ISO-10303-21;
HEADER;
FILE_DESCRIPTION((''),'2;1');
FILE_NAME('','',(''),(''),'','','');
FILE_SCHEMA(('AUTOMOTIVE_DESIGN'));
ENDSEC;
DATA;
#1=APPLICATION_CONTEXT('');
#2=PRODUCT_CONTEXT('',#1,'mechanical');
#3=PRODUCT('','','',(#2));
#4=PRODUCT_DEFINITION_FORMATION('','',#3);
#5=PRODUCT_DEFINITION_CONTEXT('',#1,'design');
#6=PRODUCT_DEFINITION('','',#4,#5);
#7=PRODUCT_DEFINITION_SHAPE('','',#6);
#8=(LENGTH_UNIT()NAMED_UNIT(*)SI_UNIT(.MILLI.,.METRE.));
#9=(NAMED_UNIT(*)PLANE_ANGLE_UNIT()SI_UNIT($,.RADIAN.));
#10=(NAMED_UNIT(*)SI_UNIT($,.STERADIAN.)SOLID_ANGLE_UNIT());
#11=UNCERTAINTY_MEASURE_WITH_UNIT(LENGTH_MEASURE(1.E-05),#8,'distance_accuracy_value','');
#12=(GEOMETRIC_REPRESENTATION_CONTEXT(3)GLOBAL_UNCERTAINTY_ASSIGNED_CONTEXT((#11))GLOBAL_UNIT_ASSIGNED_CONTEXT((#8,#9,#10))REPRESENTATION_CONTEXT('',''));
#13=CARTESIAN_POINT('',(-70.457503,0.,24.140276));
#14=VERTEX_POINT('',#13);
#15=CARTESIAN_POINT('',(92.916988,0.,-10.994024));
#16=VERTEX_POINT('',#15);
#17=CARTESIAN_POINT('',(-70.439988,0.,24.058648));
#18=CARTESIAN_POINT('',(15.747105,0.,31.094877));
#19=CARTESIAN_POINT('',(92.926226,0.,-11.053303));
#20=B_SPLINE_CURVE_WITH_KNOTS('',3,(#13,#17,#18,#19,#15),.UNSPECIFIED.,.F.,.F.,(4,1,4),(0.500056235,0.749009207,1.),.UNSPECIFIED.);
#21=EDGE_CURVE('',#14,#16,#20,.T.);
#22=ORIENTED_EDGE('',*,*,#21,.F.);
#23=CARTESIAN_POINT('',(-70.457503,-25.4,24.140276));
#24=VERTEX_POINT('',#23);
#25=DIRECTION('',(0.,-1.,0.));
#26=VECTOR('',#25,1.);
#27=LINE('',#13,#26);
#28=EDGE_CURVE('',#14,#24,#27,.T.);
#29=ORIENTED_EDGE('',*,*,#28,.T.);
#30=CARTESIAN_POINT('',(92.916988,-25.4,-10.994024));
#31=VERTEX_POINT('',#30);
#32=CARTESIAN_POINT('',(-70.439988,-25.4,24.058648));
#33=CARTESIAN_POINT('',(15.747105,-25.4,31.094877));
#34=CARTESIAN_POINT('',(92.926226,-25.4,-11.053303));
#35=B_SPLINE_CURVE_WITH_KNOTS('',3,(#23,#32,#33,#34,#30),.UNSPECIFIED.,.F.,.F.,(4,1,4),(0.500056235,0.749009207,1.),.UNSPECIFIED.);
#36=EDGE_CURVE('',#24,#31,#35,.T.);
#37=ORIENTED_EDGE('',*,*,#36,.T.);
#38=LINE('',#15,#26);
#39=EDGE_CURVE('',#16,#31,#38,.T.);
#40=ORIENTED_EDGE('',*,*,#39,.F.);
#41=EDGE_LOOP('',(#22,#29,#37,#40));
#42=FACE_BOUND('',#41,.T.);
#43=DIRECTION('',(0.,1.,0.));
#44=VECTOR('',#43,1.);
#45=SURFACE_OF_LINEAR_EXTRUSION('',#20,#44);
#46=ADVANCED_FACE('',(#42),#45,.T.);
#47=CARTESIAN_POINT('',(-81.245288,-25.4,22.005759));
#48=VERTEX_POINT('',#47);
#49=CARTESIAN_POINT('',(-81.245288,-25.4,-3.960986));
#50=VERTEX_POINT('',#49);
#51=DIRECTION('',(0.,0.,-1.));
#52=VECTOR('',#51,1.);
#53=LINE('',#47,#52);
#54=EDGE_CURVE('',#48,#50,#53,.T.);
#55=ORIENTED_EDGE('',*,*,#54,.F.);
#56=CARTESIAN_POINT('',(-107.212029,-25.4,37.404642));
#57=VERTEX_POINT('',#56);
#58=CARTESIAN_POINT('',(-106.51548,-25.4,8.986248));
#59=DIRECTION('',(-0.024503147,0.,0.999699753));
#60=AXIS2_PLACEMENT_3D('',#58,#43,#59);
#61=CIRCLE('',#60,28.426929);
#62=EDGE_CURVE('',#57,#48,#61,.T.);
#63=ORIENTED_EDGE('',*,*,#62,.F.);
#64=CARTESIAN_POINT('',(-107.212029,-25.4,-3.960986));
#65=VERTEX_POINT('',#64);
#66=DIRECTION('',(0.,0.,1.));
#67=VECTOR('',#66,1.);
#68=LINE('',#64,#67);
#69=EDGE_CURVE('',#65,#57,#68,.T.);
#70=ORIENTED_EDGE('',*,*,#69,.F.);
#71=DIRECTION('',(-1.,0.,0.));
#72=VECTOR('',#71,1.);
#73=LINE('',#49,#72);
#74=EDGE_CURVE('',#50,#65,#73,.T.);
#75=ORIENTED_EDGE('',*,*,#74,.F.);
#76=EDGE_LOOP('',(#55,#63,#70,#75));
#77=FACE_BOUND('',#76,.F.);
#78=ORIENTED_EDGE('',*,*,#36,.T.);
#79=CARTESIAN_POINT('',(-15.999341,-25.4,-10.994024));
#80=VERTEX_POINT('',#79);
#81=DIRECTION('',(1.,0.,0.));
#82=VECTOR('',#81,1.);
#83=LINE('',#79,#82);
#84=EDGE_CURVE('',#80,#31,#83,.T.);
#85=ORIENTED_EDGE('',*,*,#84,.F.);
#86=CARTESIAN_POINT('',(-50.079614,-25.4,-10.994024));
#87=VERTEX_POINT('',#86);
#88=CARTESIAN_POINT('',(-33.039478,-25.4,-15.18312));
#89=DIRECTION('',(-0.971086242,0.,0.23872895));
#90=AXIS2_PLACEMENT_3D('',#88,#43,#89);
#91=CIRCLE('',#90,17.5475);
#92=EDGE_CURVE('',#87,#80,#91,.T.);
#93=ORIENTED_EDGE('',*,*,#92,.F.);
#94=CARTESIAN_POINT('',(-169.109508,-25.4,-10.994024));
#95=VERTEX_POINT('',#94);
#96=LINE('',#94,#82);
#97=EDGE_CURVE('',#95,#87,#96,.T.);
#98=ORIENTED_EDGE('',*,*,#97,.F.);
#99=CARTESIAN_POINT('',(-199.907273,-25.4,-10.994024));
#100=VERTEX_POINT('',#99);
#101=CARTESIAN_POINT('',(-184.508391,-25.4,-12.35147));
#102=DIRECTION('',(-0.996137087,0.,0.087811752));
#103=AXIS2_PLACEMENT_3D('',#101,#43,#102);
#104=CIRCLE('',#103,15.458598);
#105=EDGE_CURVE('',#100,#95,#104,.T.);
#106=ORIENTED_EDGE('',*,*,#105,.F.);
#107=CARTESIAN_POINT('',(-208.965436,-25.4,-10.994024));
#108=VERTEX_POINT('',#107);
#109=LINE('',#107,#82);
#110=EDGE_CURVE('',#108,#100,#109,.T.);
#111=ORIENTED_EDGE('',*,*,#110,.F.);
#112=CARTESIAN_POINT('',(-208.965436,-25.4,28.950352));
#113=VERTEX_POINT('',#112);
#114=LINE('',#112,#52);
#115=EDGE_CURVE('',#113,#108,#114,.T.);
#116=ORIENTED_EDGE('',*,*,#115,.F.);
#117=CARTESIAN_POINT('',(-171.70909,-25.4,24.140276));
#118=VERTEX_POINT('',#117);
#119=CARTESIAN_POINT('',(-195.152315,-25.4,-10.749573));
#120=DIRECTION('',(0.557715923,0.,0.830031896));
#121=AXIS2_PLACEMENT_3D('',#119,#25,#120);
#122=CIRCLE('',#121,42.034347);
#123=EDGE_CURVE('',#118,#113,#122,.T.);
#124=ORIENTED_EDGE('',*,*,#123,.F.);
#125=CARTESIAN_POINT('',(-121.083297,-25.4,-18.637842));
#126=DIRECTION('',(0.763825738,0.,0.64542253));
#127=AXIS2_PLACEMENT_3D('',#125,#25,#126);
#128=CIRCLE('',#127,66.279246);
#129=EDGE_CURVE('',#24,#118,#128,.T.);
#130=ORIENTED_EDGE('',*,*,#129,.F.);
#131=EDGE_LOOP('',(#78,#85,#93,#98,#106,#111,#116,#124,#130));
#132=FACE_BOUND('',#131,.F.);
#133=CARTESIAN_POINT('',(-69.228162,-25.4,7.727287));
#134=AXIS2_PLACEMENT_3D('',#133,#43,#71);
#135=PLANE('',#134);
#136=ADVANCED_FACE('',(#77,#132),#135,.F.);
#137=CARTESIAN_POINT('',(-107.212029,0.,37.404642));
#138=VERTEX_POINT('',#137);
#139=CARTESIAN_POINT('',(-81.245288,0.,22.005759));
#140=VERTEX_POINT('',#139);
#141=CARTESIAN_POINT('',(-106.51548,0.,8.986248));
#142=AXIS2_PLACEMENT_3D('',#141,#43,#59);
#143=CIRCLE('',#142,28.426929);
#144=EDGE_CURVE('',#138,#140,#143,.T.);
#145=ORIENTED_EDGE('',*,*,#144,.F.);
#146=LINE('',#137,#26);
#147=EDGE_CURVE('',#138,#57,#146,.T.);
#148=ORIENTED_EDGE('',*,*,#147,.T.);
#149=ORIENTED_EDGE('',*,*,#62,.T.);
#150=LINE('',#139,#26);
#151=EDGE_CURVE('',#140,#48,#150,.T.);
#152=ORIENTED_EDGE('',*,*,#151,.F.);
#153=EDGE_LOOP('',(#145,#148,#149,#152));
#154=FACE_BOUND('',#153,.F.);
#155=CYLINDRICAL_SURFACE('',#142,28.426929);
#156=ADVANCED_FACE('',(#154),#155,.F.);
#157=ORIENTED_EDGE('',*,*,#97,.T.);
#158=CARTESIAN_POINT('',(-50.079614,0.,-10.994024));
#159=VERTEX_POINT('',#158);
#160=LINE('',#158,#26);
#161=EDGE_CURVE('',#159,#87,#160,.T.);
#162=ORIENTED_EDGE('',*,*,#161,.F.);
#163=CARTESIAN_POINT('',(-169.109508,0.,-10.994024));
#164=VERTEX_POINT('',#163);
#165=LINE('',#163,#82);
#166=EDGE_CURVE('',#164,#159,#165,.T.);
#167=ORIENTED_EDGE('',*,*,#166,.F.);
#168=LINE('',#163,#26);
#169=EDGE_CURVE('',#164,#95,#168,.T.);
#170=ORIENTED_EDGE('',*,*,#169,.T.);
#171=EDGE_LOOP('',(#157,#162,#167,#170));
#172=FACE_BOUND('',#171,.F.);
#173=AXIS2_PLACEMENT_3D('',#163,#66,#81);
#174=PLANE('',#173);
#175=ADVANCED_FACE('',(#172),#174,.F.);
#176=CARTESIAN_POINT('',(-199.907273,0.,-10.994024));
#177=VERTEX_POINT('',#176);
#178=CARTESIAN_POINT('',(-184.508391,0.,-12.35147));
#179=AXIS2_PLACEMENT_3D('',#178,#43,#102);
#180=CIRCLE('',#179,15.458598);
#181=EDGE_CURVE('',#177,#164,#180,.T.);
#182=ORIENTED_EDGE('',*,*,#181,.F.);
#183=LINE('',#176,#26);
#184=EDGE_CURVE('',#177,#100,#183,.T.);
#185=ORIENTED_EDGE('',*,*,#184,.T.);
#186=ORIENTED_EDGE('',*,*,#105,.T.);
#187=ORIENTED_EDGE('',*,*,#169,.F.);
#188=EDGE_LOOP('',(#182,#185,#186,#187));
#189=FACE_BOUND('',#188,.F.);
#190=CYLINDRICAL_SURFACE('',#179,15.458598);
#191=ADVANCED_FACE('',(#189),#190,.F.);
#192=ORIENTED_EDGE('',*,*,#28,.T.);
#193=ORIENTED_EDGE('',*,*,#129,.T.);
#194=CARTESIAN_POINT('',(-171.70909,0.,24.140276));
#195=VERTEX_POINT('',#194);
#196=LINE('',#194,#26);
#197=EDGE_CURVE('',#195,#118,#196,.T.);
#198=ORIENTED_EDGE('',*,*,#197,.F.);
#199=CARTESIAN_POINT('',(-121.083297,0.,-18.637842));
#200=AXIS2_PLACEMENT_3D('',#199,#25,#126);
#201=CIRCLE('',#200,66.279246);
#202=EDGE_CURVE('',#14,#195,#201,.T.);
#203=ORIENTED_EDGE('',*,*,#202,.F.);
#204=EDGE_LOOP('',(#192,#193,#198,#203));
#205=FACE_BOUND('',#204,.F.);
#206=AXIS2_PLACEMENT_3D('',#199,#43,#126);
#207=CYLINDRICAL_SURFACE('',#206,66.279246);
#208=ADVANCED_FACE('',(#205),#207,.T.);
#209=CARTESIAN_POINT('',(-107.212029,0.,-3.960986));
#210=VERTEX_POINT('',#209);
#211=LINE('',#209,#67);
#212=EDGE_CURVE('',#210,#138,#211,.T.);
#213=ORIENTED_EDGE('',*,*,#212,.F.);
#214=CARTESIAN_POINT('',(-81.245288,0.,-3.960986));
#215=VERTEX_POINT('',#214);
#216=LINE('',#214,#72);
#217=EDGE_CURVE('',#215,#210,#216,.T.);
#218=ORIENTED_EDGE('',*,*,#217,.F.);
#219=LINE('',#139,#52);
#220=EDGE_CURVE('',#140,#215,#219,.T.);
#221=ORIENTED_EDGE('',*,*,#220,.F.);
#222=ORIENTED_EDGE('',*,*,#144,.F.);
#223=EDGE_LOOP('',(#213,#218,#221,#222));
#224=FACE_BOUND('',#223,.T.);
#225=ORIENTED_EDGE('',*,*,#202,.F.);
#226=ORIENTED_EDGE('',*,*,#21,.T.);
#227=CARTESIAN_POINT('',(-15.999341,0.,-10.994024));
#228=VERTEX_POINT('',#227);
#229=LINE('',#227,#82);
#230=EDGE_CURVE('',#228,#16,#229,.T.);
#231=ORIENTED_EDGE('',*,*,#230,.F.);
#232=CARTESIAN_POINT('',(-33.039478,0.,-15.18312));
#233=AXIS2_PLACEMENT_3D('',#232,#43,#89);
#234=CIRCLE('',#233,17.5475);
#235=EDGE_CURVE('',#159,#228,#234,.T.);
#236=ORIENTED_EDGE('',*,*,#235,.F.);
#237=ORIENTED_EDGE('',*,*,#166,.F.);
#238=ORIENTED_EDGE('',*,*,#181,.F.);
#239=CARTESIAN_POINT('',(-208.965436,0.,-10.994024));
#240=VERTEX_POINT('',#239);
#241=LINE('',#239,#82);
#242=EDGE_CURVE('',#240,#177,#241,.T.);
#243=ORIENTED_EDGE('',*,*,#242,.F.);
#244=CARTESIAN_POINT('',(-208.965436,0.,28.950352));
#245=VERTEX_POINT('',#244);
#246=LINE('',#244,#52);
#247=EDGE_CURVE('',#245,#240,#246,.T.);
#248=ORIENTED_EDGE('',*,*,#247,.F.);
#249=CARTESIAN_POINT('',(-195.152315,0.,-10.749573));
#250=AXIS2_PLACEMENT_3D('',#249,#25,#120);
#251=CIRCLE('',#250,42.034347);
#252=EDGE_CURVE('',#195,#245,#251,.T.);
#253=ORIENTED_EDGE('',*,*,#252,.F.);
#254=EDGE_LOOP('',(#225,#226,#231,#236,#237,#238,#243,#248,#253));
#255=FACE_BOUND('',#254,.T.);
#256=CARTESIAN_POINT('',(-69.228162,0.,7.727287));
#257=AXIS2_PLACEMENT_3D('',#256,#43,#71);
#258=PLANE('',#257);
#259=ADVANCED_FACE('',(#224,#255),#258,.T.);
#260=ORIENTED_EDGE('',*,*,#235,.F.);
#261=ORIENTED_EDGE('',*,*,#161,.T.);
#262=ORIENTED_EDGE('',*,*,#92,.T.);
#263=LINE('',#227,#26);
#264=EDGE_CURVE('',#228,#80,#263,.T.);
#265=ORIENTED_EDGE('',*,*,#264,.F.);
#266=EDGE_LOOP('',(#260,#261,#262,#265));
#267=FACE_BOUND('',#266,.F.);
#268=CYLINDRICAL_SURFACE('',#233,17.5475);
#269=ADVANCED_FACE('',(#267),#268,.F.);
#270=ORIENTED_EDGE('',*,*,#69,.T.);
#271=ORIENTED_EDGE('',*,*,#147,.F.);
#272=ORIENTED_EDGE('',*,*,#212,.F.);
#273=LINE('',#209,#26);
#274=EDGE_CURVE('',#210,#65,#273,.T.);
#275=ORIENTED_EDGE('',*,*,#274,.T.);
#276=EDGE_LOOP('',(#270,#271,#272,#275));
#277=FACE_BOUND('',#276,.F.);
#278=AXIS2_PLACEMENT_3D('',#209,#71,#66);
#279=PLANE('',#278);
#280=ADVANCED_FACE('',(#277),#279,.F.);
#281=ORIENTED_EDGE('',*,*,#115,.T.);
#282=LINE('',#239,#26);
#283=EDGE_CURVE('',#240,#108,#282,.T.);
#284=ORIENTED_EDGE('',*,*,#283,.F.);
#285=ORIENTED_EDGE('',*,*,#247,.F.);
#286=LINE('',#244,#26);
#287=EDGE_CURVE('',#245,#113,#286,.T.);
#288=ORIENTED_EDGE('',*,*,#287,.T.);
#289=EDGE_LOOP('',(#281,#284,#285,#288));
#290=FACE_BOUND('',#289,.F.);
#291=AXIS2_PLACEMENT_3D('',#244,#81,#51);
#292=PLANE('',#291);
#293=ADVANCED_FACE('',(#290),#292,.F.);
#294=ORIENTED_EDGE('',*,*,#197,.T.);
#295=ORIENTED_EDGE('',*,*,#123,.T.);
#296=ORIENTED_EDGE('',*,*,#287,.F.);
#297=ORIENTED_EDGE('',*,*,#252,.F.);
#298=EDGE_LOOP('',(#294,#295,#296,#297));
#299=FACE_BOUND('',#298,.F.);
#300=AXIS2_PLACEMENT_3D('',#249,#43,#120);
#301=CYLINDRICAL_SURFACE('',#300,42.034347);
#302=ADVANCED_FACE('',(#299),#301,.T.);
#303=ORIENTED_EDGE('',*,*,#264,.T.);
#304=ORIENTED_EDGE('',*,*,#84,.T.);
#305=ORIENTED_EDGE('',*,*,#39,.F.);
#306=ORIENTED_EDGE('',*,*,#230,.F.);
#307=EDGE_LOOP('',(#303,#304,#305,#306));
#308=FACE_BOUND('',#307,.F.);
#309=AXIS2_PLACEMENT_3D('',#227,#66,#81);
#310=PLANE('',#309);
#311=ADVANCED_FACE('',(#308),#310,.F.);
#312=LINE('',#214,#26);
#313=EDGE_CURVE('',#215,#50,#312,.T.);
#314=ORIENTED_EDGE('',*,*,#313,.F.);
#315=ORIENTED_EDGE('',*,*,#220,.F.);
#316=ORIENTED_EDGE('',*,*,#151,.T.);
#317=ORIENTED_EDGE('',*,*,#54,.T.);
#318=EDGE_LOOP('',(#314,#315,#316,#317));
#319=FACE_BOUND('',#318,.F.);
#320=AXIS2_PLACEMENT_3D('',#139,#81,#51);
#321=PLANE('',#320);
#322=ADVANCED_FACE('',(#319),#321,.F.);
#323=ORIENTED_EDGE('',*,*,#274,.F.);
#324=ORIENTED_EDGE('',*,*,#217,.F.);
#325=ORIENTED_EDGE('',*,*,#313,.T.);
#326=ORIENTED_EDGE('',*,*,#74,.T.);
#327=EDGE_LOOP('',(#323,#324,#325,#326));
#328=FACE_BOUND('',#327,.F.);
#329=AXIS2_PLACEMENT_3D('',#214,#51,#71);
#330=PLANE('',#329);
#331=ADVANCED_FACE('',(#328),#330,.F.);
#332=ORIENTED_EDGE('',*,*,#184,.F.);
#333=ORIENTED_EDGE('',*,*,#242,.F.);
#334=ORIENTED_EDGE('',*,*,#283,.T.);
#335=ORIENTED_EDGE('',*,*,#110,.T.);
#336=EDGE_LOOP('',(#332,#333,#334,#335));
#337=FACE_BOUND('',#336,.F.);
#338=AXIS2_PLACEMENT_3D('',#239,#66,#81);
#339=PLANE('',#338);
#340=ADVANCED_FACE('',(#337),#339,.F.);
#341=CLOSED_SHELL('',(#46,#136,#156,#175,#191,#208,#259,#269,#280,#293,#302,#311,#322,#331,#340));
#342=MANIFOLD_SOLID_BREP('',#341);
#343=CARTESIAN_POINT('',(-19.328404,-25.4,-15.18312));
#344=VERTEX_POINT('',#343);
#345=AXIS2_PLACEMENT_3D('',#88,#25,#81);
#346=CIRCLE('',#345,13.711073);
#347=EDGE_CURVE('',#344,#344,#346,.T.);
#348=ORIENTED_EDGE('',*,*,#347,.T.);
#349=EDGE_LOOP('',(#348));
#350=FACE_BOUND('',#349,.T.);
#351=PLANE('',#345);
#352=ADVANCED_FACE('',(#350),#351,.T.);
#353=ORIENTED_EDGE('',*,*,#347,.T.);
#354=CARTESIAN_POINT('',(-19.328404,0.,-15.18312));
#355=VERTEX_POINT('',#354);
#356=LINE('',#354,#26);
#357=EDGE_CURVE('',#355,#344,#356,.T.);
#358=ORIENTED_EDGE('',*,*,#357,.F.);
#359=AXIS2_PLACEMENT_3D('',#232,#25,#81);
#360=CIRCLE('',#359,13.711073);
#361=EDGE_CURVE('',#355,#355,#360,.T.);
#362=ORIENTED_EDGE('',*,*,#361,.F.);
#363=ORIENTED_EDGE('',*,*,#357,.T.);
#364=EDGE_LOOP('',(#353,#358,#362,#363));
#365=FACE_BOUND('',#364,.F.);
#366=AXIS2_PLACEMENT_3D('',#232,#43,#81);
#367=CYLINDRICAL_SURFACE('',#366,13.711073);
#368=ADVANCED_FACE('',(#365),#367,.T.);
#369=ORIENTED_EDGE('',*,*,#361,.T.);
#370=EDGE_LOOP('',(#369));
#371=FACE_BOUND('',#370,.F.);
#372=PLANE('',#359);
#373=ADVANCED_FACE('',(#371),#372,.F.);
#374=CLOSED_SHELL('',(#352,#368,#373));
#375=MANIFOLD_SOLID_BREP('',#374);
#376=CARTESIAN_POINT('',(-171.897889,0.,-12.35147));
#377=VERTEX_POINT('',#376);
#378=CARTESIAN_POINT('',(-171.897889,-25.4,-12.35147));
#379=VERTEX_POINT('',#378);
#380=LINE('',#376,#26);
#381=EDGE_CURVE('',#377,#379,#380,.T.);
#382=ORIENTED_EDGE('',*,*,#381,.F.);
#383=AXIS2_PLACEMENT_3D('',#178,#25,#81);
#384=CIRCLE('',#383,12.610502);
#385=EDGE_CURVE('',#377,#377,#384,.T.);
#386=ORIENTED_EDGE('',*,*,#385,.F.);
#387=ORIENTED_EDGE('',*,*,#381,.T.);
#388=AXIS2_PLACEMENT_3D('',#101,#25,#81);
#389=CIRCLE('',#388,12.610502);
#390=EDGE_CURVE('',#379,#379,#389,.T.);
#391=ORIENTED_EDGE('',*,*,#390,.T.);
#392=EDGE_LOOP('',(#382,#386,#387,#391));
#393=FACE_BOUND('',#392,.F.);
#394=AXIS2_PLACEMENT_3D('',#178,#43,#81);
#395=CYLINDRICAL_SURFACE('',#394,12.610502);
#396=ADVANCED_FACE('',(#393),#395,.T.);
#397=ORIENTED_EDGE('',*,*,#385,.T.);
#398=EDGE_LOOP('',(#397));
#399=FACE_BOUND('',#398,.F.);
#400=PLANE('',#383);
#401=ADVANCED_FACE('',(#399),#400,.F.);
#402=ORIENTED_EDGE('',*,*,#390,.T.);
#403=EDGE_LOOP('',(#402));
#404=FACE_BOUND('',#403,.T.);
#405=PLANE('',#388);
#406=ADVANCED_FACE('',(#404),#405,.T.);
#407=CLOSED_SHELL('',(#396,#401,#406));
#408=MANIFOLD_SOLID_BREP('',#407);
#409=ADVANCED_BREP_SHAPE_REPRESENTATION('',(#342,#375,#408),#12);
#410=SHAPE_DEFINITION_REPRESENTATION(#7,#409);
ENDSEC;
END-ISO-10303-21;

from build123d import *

# Parameters (mm, degrees)
F0_R     = 13.7110734448
F1_DEPTH = 25.4
F0_R_2   = 12.6105017718


# Not quite as in the source:
# - a feature of the source that left no trace in its solid (it failed there, or was rolled back) is left out


with BuildPart() as f1:
    # F0 (on Front) → F1 (new body)
    with BuildSketch(Plane.XZ):
        with Locations((-33.0394776538, -15.1831200019)):
            Circle(F0_R)
    extrude(amount=F1_DEPTH)


with BuildPart() as f1b:
    # F0 (on Front) → F1, piece 2 (new body)
    with BuildSketch(Plane.XZ):
        with BuildLine():
            Line((92.9161560608, -10.9940236434), (92.9169878364, -10.9940236434))
            add(Edge.make_bspline(
                [(-70.4575031996, 24.1402760148), (-70.4399876122, 24.0586483776), (15.7471046571, 31.0948765027), (92.9262256442, -11.0533031958), (92.9169878364, -10.9940236434)],
                knots=[0.5000562346, 0.5000562346, 0.5000562346, 0.5000562346, 0.7490092067, 1, 1, 1, 1], degree=3))
            ThreePointArc((-70.4575031996, 24.1402760148), (-121.0832968354, 47.6414032219), (-171.7090904713, 24.1402760148))
            ThreePointArc((-171.7090904713, 24.1402760148), (-189.7700354442, 30.9387637162), (-208.9654356241, 28.9503522217))
            Line((-208.9654356241, 28.9503522217), (-208.9654356241, -10.9940236434))
            Line((-208.9654356241, -10.9940236434), (-199.9072730541, -10.9940236434))
            ThreePointArc((-199.9072730541, -10.9940236434), (-184.5083907247, 3.107127368), (-169.1095083952, -10.9940236434))
            Line((-169.1095083952, -10.9940236434), (-154.7798216343, -10.9940236434))
            Line((-154.7798216343, -10.9940236434), (-50.079613924, -10.9940236434))
            ThreePointArc((-50.079613924, -10.9940236434), (-33.0394776538, 2.3643804585), (-15.9993413836, -10.9940236434))
            Line((-15.9993413836, -10.9940236434), (92.9161560608, -10.9940236434))
        make_face()
        with BuildLine():
            ThreePointArc((-107.2120293975, 37.4046415091), (-92.0155707574, 33.43707411), (-81.2452882528, 22.0057591796))
            Line((-81.2452882528, 22.0057591796), (-81.2452882528, -3.9609856904))
            Line((-81.2452882528, -3.9609856904), (-107.2120293975, -3.9609856904))
            Line((-107.2120293975, -3.9609856904), (-107.2120293975, 37.4046415091))
        make_face(mode=Mode.SUBTRACT)
    extrude(amount=F1_DEPTH)


with BuildPart() as f1c:
    # F0 (on Front) → F1, piece 3 (new body)
    with BuildSketch(Plane.XZ):
        with Locations((-184.5083907247, -12.3514701781)):
            Circle(F0_R_2)
    extrude(amount=F1_DEPTH)


solid = Compound([f1.part, f1b.part, f1c.part])
